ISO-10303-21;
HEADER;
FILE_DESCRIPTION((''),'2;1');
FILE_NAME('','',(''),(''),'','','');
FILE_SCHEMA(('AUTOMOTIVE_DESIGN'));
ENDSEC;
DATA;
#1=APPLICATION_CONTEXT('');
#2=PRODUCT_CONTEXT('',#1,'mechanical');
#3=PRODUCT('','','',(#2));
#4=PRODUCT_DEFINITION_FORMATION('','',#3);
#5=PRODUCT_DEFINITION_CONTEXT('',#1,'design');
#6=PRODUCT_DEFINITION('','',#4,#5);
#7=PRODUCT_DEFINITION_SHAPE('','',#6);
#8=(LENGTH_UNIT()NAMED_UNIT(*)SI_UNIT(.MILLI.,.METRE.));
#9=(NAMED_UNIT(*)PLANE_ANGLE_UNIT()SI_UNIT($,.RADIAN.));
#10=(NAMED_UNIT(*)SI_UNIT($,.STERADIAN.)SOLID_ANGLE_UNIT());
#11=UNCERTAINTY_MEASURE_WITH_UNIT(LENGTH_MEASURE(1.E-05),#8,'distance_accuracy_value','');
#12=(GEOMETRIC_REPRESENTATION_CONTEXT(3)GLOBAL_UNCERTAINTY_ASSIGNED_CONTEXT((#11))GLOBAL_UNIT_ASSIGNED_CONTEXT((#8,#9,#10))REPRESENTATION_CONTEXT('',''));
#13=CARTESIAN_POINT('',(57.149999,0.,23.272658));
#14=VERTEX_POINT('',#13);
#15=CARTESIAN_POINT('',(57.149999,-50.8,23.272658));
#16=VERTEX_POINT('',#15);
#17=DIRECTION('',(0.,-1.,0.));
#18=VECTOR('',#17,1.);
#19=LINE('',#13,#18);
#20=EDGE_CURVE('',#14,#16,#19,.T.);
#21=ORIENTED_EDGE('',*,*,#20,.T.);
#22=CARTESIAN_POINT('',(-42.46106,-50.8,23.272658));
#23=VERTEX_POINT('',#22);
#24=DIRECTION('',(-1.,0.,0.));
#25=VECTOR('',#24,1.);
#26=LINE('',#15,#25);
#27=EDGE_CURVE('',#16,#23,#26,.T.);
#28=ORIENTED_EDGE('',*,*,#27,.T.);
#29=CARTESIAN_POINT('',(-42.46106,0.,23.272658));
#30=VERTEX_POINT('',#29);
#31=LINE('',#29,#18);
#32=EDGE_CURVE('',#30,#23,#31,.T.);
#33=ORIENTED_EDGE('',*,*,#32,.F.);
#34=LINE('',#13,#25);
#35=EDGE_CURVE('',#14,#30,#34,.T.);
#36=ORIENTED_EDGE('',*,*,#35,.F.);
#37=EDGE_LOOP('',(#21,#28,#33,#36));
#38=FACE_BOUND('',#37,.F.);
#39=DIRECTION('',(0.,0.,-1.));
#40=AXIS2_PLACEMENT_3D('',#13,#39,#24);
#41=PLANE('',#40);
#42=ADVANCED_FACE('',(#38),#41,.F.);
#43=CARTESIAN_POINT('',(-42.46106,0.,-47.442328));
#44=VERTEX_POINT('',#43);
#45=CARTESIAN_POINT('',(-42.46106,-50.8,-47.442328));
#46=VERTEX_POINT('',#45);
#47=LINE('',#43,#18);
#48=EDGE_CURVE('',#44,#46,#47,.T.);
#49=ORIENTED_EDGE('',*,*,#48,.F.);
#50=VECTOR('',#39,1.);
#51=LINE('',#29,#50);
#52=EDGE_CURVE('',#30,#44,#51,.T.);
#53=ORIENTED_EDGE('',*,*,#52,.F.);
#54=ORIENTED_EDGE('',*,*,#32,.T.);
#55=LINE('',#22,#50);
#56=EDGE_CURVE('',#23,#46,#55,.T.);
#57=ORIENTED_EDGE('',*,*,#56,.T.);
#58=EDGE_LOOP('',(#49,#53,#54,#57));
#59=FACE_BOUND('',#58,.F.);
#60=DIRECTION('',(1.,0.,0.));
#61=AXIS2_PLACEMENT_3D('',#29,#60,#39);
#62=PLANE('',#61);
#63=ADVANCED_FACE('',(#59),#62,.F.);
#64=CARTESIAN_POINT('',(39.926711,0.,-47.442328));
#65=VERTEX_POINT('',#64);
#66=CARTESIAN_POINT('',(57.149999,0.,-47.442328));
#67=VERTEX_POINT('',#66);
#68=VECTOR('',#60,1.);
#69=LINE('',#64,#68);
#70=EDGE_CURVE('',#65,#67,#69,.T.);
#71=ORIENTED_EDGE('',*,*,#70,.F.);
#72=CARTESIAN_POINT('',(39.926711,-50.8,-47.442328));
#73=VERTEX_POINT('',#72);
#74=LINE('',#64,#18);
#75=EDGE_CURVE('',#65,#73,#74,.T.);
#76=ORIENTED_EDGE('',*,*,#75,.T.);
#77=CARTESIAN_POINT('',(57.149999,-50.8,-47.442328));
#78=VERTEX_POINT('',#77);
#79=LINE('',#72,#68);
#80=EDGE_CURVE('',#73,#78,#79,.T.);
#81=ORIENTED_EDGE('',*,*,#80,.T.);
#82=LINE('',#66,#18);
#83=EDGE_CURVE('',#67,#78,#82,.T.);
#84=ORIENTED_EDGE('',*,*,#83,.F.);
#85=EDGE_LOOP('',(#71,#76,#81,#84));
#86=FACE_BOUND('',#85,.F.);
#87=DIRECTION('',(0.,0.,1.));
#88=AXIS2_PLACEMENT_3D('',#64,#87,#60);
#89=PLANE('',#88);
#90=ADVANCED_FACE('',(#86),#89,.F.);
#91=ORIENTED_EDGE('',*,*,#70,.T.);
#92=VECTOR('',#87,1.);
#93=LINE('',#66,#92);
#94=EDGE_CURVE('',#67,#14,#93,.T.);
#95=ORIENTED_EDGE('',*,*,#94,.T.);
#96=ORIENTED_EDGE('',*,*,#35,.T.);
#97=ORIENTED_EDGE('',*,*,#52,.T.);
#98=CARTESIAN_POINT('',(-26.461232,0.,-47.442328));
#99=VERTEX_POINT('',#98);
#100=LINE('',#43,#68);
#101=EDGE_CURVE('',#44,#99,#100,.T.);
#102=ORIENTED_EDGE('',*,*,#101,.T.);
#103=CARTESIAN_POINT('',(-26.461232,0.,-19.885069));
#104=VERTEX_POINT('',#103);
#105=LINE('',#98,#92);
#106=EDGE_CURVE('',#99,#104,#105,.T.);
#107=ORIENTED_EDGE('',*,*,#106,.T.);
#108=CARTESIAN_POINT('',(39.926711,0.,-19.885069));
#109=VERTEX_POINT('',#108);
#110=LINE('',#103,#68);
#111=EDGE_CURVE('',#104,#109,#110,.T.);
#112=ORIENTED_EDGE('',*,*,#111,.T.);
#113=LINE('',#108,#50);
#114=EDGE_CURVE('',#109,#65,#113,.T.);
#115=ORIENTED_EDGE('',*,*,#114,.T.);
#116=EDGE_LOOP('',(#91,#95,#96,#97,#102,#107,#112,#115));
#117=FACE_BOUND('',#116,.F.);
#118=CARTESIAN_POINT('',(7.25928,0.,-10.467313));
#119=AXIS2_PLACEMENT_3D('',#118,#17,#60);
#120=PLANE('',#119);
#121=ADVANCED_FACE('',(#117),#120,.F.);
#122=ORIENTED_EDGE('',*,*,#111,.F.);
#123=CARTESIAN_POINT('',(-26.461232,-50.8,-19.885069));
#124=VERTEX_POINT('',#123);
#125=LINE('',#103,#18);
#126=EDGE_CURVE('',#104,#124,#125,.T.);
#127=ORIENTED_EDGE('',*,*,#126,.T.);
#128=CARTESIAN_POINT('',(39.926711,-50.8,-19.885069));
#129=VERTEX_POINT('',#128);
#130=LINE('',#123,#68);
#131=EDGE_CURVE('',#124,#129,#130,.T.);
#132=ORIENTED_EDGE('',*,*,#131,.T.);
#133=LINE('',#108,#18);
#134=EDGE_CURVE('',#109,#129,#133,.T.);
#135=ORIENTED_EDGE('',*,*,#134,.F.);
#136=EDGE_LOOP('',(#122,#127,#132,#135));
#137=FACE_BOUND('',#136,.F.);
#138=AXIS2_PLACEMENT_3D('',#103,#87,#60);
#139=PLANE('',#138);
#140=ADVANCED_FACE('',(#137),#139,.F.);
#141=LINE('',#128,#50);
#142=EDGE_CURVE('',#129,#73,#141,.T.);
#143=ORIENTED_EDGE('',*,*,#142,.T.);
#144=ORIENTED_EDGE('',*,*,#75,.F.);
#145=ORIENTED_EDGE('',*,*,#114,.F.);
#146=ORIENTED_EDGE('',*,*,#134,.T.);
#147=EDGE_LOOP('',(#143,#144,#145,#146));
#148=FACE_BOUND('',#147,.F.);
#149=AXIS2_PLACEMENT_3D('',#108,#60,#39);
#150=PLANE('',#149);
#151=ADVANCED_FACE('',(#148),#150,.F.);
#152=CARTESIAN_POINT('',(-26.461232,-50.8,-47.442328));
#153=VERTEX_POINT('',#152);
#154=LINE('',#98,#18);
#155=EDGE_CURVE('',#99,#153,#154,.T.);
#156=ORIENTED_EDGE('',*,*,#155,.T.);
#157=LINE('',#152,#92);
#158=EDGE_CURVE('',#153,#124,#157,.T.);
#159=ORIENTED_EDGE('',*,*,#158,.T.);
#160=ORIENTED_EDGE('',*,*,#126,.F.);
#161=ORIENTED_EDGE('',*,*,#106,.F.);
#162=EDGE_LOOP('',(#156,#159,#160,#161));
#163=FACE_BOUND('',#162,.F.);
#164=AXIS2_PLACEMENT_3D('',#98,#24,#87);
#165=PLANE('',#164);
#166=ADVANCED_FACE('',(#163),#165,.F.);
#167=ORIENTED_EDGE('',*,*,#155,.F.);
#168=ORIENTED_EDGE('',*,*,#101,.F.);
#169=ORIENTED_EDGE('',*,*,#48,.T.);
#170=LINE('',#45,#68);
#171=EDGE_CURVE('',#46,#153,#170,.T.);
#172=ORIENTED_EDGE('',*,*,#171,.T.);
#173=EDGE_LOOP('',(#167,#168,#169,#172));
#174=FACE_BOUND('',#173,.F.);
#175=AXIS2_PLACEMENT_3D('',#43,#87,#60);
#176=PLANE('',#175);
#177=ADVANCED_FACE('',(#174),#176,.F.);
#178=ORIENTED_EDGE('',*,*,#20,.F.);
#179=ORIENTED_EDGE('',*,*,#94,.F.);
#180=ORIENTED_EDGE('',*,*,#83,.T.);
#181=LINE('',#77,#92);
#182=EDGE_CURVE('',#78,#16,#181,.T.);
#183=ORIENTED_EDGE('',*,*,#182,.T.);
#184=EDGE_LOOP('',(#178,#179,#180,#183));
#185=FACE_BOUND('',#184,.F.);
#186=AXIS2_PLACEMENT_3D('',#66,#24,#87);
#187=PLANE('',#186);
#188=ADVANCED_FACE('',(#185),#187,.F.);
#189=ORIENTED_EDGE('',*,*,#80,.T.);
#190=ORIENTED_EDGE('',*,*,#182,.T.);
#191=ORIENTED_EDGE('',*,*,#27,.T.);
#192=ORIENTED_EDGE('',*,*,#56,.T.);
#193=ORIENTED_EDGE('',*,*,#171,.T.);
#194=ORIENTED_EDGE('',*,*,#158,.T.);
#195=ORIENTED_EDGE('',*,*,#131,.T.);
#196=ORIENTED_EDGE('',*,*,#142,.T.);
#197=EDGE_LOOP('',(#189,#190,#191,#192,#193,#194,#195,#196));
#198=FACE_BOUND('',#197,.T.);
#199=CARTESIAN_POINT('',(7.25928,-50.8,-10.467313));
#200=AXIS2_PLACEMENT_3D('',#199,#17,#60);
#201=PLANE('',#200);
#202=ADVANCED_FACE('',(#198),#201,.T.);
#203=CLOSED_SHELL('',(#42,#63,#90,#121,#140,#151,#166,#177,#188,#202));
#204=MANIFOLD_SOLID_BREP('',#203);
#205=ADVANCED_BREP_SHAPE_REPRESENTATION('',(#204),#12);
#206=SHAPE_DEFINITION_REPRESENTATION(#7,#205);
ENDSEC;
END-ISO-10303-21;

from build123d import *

# Parameters (mm, degrees)
F1_DEPTH = 50.8


# Not quite as in the source:
# - the program builds the solid bodies; features that only make, move or delete a surface that nothing else refers to are left out


with BuildPart() as f1:
    # F0 (on Front) → F1 (new body)
    with BuildSketch(Plane.XZ):
        Polygon((57.1499988437, 23.2726577669), (-42.4610599875, 23.2726577669), (-42.4610599875, -47.4423281848), (-26.4612324536, -47.4423281848), (-26.4612324536, -19.8850687593), (39.9267114699, -19.8850687593), (39.9267114699, -47.4423281848), (57.1499988437, -47.4423281848), align=None)
    extrude(amount=F1_DEPTH)


solid = f1.part
